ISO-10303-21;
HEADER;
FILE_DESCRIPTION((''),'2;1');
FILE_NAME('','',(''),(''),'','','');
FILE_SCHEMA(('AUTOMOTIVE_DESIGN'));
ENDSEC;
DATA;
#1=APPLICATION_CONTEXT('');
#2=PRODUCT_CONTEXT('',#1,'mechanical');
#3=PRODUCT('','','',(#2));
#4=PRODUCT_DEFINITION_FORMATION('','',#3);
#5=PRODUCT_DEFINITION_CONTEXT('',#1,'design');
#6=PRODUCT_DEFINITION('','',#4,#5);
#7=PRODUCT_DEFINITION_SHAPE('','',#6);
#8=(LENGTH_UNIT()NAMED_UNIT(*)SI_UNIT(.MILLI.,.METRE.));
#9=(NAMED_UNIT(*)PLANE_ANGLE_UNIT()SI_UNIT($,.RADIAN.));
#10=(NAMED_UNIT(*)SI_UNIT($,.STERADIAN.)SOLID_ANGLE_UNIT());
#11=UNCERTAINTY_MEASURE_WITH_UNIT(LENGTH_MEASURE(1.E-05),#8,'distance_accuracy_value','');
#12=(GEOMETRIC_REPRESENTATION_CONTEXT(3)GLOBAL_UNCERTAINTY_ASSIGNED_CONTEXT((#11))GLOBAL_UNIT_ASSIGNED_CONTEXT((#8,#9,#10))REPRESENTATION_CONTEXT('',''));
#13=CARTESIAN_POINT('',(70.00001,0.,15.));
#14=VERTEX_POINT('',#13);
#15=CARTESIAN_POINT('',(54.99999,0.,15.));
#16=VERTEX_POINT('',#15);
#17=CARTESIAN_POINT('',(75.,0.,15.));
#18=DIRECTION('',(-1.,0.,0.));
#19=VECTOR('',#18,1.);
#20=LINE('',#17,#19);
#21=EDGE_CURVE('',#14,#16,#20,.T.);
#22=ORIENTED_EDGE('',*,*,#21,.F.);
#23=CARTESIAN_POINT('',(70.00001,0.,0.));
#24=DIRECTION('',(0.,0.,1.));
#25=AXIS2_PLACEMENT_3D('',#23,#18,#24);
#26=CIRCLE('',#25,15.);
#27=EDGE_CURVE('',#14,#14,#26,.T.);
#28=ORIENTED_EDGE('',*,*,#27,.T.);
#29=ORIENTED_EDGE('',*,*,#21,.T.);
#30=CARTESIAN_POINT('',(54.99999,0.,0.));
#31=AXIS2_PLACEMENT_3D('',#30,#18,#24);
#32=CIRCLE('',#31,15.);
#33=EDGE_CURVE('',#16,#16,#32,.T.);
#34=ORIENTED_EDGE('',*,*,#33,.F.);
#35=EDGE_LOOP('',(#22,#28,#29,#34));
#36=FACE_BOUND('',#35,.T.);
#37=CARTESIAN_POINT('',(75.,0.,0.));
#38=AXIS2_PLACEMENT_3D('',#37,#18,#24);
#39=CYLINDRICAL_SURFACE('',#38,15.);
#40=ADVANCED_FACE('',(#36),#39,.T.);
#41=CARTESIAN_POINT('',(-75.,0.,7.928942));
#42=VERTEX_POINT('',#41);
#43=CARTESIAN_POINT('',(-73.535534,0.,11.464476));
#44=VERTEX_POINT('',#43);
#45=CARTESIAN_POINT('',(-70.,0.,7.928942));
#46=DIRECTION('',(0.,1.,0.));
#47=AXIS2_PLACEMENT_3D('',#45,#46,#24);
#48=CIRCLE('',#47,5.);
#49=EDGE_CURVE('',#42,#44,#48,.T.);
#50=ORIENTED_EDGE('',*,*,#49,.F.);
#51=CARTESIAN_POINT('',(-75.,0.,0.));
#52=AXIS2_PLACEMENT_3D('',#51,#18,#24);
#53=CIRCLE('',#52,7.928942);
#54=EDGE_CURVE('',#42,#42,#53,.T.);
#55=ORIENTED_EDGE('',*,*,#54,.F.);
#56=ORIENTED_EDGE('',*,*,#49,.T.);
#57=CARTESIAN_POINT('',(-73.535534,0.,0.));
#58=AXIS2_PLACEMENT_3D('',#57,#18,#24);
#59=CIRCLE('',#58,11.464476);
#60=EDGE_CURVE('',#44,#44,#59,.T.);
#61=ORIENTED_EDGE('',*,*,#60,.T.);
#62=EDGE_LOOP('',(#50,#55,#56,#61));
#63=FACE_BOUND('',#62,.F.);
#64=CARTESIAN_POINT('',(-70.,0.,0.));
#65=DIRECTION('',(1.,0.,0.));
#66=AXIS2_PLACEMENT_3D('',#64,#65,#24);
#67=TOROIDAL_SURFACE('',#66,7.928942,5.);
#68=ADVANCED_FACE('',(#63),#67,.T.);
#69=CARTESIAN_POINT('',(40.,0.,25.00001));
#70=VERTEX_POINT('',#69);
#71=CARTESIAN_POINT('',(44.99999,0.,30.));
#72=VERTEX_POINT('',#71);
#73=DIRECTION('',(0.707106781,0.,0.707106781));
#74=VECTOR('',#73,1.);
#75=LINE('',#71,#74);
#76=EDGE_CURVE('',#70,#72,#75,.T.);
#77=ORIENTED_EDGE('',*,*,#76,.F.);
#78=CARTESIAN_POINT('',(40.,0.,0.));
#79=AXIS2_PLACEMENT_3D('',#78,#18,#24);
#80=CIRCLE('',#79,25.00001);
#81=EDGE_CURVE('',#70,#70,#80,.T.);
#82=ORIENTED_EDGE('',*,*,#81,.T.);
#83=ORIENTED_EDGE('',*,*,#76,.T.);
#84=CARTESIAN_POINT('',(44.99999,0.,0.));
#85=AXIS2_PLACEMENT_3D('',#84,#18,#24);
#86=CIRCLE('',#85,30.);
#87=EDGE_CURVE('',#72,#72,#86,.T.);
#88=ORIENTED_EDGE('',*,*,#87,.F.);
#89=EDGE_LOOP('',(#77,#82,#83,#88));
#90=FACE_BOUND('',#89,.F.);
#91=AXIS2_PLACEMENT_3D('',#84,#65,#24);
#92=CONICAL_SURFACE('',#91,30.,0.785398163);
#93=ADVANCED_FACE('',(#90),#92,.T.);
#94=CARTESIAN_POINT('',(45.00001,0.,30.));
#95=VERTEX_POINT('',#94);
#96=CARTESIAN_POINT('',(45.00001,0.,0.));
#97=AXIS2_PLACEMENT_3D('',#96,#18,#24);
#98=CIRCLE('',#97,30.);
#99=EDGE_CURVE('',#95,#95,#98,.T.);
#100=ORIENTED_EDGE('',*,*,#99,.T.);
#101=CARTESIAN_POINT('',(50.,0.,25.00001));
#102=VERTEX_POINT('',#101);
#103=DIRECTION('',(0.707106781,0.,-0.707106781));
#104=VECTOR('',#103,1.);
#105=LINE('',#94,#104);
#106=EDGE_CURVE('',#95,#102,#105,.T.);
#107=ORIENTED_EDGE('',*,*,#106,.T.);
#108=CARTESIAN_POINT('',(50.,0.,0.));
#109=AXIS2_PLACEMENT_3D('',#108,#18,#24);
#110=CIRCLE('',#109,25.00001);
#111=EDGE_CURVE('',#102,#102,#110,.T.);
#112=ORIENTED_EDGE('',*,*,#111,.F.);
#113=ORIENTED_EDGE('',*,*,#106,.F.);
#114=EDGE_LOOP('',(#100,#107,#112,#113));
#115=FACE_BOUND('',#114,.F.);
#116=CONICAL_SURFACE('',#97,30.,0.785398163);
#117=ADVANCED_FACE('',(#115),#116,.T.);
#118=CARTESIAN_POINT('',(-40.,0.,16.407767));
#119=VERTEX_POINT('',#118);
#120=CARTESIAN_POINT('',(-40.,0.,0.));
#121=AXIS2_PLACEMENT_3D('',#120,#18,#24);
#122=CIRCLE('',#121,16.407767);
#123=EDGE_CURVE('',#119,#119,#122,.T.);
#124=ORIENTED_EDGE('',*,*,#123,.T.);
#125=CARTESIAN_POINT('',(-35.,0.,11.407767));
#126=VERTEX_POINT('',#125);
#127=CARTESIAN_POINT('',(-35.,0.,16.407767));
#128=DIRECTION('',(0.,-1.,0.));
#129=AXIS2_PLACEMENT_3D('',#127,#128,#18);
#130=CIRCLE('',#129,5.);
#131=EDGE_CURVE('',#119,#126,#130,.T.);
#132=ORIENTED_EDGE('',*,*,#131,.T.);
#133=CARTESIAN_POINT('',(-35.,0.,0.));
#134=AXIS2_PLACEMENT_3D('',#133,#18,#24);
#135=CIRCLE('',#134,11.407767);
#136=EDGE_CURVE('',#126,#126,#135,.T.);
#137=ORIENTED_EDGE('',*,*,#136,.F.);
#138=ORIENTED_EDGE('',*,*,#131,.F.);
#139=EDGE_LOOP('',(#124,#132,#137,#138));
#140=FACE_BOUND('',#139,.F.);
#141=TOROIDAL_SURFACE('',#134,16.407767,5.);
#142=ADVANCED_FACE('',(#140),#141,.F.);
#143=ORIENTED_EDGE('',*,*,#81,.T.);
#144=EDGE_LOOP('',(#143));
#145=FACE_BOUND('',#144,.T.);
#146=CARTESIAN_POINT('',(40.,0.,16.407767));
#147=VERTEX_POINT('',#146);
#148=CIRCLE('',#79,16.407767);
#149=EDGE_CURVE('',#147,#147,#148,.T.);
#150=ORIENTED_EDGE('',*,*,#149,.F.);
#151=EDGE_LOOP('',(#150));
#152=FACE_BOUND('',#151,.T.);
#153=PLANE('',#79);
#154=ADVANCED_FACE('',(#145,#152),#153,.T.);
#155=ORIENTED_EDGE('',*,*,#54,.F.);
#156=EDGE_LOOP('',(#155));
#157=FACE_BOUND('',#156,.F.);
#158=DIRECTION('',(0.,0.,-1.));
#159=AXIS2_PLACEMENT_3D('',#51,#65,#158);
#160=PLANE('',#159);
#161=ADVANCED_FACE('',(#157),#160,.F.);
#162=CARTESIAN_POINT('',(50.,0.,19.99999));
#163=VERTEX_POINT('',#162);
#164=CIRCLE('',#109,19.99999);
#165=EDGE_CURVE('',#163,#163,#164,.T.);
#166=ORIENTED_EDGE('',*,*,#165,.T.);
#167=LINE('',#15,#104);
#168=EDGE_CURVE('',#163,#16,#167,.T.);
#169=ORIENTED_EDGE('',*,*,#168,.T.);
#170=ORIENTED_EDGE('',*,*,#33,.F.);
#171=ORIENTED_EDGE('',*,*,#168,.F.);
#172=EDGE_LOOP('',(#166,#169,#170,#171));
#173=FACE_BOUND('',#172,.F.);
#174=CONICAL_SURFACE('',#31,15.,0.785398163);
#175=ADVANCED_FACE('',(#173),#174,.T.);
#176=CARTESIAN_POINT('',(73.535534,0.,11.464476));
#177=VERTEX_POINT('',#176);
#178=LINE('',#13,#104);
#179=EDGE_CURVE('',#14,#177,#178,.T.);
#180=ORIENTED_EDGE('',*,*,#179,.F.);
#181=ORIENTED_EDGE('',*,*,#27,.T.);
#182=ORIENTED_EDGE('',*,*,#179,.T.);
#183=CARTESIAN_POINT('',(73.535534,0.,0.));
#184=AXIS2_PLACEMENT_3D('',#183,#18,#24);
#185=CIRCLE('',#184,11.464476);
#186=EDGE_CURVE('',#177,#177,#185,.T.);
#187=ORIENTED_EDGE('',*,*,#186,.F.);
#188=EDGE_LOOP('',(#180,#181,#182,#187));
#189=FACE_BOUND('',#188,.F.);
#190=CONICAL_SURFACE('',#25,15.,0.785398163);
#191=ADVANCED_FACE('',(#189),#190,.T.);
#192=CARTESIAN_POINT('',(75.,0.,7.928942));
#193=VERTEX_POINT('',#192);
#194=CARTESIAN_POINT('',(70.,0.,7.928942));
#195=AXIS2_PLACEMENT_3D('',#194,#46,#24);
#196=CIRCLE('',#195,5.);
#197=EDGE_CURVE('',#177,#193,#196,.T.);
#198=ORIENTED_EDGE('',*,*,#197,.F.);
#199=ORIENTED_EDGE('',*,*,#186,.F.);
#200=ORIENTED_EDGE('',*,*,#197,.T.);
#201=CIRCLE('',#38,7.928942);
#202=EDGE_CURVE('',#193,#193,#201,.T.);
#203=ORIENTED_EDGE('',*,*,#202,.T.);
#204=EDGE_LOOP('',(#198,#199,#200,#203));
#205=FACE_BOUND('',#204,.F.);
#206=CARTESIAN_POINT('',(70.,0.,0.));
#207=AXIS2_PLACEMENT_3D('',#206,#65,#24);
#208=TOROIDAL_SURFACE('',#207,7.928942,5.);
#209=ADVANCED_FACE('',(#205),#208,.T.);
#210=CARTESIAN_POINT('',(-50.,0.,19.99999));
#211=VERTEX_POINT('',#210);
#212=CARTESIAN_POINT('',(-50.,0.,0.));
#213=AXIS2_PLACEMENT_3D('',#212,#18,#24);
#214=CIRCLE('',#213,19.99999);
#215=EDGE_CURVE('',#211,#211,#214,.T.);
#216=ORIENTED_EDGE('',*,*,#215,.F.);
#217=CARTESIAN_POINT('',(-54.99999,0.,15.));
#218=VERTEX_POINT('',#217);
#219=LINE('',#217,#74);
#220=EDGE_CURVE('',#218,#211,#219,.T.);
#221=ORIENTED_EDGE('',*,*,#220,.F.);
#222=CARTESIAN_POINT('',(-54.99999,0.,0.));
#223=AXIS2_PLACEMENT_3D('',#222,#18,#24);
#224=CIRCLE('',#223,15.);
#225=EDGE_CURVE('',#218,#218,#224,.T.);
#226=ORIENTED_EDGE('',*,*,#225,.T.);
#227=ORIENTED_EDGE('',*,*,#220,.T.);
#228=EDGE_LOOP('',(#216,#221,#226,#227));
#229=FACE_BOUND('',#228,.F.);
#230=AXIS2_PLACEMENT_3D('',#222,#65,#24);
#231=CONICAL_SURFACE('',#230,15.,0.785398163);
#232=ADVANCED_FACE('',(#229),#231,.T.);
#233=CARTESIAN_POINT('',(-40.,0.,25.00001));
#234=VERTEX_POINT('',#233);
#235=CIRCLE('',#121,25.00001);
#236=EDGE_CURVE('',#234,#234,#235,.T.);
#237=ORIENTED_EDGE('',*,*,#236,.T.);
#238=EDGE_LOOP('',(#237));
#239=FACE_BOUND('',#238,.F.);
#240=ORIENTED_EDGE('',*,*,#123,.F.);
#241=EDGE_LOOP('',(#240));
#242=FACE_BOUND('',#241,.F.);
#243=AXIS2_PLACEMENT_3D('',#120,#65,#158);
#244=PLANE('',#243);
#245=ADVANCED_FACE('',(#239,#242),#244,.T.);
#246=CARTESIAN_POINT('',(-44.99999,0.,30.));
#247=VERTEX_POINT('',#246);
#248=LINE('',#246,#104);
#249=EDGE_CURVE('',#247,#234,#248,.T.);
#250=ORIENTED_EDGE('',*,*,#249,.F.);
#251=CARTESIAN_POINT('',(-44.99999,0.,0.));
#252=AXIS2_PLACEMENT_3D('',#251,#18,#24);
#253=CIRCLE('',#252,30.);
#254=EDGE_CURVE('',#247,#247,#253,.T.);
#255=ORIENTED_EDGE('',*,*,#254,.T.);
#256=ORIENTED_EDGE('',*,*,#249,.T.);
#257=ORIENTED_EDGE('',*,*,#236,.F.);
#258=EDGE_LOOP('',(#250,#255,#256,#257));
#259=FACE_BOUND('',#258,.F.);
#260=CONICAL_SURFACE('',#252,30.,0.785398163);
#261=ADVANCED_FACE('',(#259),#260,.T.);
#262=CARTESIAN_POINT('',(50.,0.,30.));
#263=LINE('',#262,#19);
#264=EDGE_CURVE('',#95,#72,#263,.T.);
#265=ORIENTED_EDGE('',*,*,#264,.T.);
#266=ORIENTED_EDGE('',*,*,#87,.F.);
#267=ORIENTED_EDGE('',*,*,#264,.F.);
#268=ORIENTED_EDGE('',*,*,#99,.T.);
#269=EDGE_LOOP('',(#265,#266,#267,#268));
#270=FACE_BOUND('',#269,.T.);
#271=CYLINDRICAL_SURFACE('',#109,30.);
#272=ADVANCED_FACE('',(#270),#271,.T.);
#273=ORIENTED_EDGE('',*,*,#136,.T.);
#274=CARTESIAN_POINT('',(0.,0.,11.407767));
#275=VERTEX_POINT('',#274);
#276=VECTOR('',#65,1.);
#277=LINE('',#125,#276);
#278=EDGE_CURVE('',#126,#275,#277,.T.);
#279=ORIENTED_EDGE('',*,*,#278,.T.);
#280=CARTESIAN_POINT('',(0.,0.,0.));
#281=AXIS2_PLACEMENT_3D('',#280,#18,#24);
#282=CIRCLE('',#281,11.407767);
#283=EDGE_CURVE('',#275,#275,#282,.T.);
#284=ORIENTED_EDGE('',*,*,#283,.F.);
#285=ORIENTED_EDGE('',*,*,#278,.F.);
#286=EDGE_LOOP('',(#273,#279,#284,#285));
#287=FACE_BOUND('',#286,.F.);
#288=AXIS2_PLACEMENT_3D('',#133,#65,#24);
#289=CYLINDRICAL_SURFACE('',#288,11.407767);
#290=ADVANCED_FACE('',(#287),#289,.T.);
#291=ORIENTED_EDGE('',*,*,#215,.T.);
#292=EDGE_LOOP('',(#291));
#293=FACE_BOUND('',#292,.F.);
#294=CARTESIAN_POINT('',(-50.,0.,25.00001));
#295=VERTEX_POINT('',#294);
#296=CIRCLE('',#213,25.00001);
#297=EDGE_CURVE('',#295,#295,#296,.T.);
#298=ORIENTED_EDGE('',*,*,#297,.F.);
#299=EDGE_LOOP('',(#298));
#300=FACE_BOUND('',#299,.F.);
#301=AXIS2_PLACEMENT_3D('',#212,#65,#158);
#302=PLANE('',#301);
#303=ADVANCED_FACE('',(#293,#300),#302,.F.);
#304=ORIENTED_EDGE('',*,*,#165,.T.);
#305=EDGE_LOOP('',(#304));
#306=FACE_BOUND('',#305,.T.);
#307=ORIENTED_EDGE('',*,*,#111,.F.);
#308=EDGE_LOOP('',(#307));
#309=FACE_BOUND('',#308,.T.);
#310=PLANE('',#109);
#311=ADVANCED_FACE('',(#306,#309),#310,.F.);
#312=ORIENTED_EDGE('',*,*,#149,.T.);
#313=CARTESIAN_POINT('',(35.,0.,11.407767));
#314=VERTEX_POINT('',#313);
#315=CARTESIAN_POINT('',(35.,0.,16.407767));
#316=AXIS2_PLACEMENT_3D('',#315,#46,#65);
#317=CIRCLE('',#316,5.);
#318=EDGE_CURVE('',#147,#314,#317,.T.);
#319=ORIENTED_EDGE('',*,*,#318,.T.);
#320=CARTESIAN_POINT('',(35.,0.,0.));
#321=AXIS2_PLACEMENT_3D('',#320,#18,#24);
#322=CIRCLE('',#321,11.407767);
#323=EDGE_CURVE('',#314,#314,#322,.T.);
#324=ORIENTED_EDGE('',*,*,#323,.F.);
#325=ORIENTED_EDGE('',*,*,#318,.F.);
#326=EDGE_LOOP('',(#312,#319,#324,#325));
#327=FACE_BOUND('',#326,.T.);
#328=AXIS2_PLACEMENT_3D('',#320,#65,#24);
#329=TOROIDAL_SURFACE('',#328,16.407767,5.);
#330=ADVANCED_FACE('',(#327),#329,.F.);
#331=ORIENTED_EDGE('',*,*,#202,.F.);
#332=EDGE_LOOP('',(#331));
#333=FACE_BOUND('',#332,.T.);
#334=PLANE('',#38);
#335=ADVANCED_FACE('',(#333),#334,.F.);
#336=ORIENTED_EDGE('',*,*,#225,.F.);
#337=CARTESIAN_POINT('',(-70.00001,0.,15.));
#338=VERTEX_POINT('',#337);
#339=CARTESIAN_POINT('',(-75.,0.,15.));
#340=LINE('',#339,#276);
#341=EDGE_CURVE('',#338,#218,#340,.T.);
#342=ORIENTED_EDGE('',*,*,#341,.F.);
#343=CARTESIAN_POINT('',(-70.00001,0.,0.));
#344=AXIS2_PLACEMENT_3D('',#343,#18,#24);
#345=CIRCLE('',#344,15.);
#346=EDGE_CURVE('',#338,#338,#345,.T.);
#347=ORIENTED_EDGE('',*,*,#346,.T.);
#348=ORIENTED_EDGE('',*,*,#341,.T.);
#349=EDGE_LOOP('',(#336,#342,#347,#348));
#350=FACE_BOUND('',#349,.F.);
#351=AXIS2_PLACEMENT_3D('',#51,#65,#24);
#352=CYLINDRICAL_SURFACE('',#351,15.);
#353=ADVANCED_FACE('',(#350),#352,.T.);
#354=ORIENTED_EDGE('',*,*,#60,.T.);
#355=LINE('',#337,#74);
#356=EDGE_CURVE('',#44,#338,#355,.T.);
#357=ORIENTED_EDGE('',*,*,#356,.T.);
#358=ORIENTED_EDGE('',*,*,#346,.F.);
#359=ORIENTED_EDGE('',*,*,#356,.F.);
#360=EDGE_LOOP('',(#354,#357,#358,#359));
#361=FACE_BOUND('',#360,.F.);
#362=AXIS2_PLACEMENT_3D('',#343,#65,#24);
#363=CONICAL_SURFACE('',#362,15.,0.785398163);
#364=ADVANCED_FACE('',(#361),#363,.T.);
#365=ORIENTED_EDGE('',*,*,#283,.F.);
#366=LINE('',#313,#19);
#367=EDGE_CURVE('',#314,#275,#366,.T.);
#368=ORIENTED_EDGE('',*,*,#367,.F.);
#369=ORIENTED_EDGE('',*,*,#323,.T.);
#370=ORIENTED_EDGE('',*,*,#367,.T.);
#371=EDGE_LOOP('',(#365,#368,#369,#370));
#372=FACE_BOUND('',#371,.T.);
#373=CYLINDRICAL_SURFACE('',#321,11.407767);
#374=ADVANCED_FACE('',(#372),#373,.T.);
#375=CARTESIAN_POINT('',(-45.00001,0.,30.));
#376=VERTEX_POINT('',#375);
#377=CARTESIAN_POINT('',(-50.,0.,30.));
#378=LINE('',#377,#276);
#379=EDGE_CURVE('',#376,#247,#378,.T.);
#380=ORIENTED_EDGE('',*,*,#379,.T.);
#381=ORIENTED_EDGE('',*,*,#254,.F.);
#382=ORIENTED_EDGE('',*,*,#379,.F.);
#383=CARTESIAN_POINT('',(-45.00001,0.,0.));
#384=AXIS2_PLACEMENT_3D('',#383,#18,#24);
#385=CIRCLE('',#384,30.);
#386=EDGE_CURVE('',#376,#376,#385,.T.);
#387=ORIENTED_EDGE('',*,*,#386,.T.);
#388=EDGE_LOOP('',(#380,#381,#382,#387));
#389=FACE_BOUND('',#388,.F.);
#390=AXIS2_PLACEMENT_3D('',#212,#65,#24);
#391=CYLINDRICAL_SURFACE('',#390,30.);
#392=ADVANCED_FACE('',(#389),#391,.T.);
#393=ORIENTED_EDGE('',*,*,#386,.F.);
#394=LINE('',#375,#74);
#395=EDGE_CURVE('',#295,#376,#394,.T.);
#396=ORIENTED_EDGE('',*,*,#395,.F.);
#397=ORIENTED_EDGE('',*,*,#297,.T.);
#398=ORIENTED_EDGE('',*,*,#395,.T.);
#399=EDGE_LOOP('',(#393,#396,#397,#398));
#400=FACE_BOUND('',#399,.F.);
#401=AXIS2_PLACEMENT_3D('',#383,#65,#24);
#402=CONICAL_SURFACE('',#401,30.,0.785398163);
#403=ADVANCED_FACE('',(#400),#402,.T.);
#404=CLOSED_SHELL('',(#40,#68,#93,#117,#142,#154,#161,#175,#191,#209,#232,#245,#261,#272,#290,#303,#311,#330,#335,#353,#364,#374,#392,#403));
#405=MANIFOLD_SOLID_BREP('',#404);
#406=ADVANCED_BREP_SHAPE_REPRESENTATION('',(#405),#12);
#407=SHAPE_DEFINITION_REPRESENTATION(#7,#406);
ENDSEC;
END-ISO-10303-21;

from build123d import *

# Parameters (mm, degrees)
F3_SIZE = 4.99999
F4_R    = 5


# Not quite as in the source:
# - a fillet or chamfer is up to 0.001 mm smaller than in the source, because OpenCascade refuses the exact size


with BuildPart() as f1:
    # F0 (on Front) → F1 (revolve)
    with BuildSketch(Plane.XZ):
        with BuildLine():
            Line((0, 11.4077670069), (0, 0))
            Line((0, 0), (75, 0))
            Line((75, 0), (75, 15))
            Line((75, 15), (50, 15))
            Line((50, 15), (50, 30))
            Line((50, 30), (40, 30))
            Line((40, 30), (40, 16.4077670069))
            ThreePointArc((40, 16.4077670069), (38.5355339059, 12.872233101), (35, 11.4077670069))
            Line((35, 11.4077670069), (0, 11.4077670069))
        make_face()
    revolve(axis=Axis((37.5, 0, 0), (-1, 0, 0)))

    # F2: F1 across face


with BuildPart() as f1_1:
    add(f1.part)
    add(f1.part.mirror(Plane(origin=(0, 0, 0), x_dir=(0, -1, 0), z_dir=(-1, 0, 0))))

    # F3 (size 5 in the source; OpenCascade refuses exactly that, so slightly less here)
    f3_edges = [f1_1.edges().sort_by_distance(p)[0] for p in [
        (-40, 0, -30),
        (-75, 0, -15),
        (-50, 0, -30),
        (40, 0, -30),
        (40, 0, -16.407767),
        (-35, 0, -11.407767),
        (35, 0, -11.407767),
        (75, 0, -15),
        (50, 0, -30),
        (-40, 0, -16.407767),
        (-50, 0, -15),
        (50, 0, -15),
    ]]
    chamfer(f3_edges, length=F3_SIZE)

    # F4
    f4_edges = [f1_1.edges().sort_by_distance(p)[0] for p in [
        (-75, 0, -10.00001),
        (75, 0, -10.00001),
    ]]
    fillet(f4_edges, radius=F4_R)


solid = f1_1.part
